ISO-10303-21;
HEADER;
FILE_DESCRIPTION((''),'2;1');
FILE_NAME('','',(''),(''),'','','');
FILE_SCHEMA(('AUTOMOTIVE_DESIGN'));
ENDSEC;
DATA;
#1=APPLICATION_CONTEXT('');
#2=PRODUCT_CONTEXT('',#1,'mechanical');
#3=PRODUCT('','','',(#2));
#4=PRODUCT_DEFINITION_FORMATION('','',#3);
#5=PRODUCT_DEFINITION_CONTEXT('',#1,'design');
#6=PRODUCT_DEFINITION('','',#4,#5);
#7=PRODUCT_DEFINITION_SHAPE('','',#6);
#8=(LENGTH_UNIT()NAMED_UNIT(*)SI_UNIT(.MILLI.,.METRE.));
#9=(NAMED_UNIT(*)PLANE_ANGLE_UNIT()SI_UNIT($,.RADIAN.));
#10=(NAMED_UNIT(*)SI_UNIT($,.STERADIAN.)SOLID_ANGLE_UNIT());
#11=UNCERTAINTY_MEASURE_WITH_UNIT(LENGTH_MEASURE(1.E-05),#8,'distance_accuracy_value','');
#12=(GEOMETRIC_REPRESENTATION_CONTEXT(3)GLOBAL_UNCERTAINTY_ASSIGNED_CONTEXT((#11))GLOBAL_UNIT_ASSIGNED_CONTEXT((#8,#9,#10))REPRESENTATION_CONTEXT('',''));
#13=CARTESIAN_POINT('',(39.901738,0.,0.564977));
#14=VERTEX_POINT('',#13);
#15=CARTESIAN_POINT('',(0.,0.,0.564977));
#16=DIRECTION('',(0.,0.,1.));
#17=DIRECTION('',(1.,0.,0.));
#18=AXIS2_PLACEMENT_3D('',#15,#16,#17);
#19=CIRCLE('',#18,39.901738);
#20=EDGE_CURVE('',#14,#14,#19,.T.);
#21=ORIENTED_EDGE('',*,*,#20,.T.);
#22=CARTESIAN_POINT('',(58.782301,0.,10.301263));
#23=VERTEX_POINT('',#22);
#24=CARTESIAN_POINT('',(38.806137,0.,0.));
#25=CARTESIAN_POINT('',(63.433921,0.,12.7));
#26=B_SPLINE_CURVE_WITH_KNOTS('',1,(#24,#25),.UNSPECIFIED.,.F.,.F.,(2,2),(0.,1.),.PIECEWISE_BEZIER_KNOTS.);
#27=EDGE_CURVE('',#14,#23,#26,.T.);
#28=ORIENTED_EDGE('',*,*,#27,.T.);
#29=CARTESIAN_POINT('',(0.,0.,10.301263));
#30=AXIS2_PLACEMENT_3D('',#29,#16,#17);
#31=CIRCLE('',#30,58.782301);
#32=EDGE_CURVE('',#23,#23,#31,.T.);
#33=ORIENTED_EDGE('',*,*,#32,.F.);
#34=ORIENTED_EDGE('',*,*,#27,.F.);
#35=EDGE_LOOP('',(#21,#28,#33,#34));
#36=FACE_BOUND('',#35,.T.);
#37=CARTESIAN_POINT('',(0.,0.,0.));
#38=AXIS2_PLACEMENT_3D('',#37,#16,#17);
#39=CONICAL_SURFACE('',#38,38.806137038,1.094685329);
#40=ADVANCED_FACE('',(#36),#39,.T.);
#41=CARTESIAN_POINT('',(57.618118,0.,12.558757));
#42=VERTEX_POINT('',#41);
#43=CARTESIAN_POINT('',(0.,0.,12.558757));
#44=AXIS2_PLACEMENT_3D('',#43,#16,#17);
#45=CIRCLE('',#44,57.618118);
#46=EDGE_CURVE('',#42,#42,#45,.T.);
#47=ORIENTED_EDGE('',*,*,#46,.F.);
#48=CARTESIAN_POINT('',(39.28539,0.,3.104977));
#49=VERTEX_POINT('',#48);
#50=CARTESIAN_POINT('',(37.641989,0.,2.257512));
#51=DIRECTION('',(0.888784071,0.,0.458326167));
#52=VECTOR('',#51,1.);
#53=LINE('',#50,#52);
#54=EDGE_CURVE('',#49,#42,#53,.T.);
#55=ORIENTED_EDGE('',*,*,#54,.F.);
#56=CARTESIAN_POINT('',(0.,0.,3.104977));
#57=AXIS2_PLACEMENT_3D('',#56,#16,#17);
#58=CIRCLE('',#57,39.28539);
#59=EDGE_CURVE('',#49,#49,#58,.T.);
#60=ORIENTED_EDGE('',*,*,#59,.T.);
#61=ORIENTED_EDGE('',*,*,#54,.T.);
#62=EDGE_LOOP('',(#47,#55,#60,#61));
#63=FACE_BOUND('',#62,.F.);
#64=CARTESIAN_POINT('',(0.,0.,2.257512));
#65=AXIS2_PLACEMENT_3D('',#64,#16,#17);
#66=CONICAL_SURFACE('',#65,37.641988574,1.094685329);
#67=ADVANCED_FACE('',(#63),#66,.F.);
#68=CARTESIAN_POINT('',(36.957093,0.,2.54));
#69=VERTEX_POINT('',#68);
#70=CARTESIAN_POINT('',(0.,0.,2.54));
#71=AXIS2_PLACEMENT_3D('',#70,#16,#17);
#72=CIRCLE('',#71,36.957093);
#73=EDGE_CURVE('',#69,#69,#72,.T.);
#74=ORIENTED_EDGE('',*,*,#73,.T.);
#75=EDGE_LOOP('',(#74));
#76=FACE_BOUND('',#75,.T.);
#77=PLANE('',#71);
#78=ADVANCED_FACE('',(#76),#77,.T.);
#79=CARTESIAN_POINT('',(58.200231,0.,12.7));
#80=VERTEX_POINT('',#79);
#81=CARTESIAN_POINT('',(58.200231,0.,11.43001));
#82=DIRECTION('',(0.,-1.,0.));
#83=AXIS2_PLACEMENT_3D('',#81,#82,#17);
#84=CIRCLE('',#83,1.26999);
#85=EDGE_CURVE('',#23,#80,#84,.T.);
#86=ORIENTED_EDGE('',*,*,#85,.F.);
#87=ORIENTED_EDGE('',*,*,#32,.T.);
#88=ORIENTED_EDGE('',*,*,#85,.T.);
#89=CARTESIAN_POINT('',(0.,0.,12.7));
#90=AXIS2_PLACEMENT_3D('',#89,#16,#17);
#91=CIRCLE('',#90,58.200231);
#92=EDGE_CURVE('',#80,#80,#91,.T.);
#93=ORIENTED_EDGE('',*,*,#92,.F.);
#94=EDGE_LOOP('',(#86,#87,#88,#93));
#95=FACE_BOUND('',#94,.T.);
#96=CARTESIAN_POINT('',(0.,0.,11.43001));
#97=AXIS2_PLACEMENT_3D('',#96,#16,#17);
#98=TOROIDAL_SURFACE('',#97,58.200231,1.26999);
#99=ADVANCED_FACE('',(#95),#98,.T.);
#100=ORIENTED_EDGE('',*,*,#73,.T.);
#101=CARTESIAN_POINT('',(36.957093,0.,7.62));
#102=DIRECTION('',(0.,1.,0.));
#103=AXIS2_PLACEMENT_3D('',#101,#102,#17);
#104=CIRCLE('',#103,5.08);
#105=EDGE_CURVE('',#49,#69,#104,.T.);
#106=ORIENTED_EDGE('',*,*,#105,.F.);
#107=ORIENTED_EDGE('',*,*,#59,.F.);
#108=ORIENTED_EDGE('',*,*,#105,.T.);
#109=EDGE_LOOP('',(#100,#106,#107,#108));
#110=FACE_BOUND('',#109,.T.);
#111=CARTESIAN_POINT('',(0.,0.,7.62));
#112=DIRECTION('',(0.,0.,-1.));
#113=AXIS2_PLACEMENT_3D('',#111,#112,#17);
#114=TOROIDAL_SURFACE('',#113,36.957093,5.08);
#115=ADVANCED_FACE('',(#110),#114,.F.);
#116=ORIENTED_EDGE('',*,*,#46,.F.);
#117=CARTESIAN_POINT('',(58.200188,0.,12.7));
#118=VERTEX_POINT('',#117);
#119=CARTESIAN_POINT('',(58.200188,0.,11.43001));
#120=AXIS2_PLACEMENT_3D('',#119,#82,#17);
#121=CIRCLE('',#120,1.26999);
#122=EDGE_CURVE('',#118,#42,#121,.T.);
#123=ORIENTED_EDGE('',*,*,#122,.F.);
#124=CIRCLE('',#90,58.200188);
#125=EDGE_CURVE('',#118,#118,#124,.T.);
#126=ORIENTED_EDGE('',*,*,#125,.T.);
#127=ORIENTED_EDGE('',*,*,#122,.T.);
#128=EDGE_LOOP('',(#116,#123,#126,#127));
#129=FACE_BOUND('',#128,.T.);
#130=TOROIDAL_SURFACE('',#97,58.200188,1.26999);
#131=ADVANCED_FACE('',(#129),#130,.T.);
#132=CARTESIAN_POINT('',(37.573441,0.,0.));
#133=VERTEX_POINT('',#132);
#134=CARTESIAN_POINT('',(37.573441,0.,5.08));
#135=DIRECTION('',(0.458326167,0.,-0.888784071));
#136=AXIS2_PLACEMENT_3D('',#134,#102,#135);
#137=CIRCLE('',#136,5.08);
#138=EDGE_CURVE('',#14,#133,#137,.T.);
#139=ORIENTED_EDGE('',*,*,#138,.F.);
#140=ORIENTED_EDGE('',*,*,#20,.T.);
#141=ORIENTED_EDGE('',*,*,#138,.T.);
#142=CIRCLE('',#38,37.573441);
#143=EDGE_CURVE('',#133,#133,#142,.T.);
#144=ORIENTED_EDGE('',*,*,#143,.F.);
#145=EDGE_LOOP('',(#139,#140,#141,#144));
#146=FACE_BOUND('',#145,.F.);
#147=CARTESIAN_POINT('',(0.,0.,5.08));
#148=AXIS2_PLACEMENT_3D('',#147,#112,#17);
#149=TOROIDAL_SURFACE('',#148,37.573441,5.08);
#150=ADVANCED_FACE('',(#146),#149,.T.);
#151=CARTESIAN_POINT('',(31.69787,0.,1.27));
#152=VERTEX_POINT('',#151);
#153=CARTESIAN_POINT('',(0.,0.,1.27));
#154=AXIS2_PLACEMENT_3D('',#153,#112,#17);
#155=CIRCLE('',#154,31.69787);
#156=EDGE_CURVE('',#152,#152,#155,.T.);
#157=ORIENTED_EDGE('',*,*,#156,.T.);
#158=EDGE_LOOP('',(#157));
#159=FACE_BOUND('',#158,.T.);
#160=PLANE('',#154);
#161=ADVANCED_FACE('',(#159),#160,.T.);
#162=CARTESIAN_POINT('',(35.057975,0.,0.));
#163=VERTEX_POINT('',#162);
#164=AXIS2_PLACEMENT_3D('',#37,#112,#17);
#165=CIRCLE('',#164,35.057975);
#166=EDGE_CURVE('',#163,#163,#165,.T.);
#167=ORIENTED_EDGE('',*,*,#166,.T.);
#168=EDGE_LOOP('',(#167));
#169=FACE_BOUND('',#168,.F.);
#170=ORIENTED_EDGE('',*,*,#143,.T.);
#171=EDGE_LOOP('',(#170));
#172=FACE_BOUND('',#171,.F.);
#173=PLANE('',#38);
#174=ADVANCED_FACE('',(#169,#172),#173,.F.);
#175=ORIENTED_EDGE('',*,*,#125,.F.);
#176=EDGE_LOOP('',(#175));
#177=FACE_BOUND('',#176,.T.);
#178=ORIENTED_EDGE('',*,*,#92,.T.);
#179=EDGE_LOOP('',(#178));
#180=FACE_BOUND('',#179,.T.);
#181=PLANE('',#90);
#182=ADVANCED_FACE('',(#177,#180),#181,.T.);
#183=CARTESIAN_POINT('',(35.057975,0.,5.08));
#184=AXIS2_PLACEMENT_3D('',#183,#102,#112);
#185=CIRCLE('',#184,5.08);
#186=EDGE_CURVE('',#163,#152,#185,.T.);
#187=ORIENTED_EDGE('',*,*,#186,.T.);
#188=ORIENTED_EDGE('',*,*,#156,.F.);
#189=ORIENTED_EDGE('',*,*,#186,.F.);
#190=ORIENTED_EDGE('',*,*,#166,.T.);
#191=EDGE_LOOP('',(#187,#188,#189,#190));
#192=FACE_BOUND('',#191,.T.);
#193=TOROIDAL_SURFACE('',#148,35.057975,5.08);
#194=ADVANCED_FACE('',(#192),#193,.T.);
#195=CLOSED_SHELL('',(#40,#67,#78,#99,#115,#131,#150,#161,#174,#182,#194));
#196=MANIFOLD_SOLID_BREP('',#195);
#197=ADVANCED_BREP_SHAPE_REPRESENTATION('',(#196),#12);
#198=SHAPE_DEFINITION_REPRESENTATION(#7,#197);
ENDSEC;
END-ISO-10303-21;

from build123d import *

# Parameters (mm, degrees)
F0_R     = 38.8061370384
F2_R     = 63.433920718
F4_T     = -2.54
F5_R     = 1.26999
F6_R     = 31.6978703438
F7_DEPTH = 1.27
F9_R     = 5.08


# Not quite as in the source:
# - a fillet or chamfer that OpenCascade refuses, or shapes differently, is made with other operations: its cross-section is extruded or revolved along the edge and cut away or added
# - a fillet or chamfer is up to 0.001 mm smaller than in the source, because OpenCascade refuses the exact size


with BuildPart() as f3:
    # F0 (on Top) → F3 section 0
    with BuildSketch(Plane.XY):
        Circle(F0_R)
    # F2 (on offset) → F3 section 1
    with BuildSketch(Plane.XY.offset(12.7)):
        Circle(F2_R)
    loft()

    # F4
    f4_openings = [f3.faces().sort_by_distance(p)[0] for p in [
        (0, 0, 12.7),
    ]]
    offset(amount=F4_T, openings=f4_openings, kind=Kind.INTERSECTION)

    # F5 (radius 1.27 in the source; OpenCascade refuses exactly that, so slightly less here)
    f5_edges = [f3.edges().sort_by_distance(p)[0] for p in [
        (-63.433921, 0, 12.7),
        (-57.892016, 0, 12.7),
    ]]
    fillet(f5_edges, radius=F5_R)

    # F6 (on face) → F7 (cut)
    with BuildSketch(Plane(origin=(0, 0, 0), x_dir=(1, 0, 0), z_dir=(0, 0, -1))):
        Circle(F6_R)
    extrude(amount=-F7_DEPTH, mode=Mode.SUBTRACT)

    # F8: fillet of radius 5.08 on 2 edges, made by hand

    # F8_s1 → F8_t2 (revolve, cut)
    with BuildSketch(Plane.XZ):
        with BuildLine():
            ThreePointArc((35.0579745088, 0), (33.2619232846, 0.3280951188), (31.6978703438, 1.27))
            Line((31.6978703438, 1.27), (31.6978703438, 0))
            Line((31.6978703438, 0), (35.0579745088, 0))
        make_face()
    revolve(axis=Axis((0, 0, 0), (0, 0, -1)), mode=Mode.SUBTRACT)

    # F8_s3 → F8_t4 (revolve, cut)
    with BuildSketch(Plane.XZ):
        with BuildLine():
            ThreePointArc((39.9017377768, 0.5649769203), (38.7713729734, 0.1432643759), (37.5734408477, 0))
            Line((37.5734408477, 0), (38.8061370384, 0))
            Line((38.8061370384, 0), (39.9017377768, 0.5649769203))
        make_face()
    revolve(axis=Axis((0, 0, 0), (0, 0, 1)), mode=Mode.SUBTRACT)

    # F9
    f9_edges = [f3.edges().sort_by_distance(p)[0] for p in [
        (-38.189789, 0, 2.54),
    ]]
    fillet(f9_edges, radius=F9_R)


solid = f3.part
